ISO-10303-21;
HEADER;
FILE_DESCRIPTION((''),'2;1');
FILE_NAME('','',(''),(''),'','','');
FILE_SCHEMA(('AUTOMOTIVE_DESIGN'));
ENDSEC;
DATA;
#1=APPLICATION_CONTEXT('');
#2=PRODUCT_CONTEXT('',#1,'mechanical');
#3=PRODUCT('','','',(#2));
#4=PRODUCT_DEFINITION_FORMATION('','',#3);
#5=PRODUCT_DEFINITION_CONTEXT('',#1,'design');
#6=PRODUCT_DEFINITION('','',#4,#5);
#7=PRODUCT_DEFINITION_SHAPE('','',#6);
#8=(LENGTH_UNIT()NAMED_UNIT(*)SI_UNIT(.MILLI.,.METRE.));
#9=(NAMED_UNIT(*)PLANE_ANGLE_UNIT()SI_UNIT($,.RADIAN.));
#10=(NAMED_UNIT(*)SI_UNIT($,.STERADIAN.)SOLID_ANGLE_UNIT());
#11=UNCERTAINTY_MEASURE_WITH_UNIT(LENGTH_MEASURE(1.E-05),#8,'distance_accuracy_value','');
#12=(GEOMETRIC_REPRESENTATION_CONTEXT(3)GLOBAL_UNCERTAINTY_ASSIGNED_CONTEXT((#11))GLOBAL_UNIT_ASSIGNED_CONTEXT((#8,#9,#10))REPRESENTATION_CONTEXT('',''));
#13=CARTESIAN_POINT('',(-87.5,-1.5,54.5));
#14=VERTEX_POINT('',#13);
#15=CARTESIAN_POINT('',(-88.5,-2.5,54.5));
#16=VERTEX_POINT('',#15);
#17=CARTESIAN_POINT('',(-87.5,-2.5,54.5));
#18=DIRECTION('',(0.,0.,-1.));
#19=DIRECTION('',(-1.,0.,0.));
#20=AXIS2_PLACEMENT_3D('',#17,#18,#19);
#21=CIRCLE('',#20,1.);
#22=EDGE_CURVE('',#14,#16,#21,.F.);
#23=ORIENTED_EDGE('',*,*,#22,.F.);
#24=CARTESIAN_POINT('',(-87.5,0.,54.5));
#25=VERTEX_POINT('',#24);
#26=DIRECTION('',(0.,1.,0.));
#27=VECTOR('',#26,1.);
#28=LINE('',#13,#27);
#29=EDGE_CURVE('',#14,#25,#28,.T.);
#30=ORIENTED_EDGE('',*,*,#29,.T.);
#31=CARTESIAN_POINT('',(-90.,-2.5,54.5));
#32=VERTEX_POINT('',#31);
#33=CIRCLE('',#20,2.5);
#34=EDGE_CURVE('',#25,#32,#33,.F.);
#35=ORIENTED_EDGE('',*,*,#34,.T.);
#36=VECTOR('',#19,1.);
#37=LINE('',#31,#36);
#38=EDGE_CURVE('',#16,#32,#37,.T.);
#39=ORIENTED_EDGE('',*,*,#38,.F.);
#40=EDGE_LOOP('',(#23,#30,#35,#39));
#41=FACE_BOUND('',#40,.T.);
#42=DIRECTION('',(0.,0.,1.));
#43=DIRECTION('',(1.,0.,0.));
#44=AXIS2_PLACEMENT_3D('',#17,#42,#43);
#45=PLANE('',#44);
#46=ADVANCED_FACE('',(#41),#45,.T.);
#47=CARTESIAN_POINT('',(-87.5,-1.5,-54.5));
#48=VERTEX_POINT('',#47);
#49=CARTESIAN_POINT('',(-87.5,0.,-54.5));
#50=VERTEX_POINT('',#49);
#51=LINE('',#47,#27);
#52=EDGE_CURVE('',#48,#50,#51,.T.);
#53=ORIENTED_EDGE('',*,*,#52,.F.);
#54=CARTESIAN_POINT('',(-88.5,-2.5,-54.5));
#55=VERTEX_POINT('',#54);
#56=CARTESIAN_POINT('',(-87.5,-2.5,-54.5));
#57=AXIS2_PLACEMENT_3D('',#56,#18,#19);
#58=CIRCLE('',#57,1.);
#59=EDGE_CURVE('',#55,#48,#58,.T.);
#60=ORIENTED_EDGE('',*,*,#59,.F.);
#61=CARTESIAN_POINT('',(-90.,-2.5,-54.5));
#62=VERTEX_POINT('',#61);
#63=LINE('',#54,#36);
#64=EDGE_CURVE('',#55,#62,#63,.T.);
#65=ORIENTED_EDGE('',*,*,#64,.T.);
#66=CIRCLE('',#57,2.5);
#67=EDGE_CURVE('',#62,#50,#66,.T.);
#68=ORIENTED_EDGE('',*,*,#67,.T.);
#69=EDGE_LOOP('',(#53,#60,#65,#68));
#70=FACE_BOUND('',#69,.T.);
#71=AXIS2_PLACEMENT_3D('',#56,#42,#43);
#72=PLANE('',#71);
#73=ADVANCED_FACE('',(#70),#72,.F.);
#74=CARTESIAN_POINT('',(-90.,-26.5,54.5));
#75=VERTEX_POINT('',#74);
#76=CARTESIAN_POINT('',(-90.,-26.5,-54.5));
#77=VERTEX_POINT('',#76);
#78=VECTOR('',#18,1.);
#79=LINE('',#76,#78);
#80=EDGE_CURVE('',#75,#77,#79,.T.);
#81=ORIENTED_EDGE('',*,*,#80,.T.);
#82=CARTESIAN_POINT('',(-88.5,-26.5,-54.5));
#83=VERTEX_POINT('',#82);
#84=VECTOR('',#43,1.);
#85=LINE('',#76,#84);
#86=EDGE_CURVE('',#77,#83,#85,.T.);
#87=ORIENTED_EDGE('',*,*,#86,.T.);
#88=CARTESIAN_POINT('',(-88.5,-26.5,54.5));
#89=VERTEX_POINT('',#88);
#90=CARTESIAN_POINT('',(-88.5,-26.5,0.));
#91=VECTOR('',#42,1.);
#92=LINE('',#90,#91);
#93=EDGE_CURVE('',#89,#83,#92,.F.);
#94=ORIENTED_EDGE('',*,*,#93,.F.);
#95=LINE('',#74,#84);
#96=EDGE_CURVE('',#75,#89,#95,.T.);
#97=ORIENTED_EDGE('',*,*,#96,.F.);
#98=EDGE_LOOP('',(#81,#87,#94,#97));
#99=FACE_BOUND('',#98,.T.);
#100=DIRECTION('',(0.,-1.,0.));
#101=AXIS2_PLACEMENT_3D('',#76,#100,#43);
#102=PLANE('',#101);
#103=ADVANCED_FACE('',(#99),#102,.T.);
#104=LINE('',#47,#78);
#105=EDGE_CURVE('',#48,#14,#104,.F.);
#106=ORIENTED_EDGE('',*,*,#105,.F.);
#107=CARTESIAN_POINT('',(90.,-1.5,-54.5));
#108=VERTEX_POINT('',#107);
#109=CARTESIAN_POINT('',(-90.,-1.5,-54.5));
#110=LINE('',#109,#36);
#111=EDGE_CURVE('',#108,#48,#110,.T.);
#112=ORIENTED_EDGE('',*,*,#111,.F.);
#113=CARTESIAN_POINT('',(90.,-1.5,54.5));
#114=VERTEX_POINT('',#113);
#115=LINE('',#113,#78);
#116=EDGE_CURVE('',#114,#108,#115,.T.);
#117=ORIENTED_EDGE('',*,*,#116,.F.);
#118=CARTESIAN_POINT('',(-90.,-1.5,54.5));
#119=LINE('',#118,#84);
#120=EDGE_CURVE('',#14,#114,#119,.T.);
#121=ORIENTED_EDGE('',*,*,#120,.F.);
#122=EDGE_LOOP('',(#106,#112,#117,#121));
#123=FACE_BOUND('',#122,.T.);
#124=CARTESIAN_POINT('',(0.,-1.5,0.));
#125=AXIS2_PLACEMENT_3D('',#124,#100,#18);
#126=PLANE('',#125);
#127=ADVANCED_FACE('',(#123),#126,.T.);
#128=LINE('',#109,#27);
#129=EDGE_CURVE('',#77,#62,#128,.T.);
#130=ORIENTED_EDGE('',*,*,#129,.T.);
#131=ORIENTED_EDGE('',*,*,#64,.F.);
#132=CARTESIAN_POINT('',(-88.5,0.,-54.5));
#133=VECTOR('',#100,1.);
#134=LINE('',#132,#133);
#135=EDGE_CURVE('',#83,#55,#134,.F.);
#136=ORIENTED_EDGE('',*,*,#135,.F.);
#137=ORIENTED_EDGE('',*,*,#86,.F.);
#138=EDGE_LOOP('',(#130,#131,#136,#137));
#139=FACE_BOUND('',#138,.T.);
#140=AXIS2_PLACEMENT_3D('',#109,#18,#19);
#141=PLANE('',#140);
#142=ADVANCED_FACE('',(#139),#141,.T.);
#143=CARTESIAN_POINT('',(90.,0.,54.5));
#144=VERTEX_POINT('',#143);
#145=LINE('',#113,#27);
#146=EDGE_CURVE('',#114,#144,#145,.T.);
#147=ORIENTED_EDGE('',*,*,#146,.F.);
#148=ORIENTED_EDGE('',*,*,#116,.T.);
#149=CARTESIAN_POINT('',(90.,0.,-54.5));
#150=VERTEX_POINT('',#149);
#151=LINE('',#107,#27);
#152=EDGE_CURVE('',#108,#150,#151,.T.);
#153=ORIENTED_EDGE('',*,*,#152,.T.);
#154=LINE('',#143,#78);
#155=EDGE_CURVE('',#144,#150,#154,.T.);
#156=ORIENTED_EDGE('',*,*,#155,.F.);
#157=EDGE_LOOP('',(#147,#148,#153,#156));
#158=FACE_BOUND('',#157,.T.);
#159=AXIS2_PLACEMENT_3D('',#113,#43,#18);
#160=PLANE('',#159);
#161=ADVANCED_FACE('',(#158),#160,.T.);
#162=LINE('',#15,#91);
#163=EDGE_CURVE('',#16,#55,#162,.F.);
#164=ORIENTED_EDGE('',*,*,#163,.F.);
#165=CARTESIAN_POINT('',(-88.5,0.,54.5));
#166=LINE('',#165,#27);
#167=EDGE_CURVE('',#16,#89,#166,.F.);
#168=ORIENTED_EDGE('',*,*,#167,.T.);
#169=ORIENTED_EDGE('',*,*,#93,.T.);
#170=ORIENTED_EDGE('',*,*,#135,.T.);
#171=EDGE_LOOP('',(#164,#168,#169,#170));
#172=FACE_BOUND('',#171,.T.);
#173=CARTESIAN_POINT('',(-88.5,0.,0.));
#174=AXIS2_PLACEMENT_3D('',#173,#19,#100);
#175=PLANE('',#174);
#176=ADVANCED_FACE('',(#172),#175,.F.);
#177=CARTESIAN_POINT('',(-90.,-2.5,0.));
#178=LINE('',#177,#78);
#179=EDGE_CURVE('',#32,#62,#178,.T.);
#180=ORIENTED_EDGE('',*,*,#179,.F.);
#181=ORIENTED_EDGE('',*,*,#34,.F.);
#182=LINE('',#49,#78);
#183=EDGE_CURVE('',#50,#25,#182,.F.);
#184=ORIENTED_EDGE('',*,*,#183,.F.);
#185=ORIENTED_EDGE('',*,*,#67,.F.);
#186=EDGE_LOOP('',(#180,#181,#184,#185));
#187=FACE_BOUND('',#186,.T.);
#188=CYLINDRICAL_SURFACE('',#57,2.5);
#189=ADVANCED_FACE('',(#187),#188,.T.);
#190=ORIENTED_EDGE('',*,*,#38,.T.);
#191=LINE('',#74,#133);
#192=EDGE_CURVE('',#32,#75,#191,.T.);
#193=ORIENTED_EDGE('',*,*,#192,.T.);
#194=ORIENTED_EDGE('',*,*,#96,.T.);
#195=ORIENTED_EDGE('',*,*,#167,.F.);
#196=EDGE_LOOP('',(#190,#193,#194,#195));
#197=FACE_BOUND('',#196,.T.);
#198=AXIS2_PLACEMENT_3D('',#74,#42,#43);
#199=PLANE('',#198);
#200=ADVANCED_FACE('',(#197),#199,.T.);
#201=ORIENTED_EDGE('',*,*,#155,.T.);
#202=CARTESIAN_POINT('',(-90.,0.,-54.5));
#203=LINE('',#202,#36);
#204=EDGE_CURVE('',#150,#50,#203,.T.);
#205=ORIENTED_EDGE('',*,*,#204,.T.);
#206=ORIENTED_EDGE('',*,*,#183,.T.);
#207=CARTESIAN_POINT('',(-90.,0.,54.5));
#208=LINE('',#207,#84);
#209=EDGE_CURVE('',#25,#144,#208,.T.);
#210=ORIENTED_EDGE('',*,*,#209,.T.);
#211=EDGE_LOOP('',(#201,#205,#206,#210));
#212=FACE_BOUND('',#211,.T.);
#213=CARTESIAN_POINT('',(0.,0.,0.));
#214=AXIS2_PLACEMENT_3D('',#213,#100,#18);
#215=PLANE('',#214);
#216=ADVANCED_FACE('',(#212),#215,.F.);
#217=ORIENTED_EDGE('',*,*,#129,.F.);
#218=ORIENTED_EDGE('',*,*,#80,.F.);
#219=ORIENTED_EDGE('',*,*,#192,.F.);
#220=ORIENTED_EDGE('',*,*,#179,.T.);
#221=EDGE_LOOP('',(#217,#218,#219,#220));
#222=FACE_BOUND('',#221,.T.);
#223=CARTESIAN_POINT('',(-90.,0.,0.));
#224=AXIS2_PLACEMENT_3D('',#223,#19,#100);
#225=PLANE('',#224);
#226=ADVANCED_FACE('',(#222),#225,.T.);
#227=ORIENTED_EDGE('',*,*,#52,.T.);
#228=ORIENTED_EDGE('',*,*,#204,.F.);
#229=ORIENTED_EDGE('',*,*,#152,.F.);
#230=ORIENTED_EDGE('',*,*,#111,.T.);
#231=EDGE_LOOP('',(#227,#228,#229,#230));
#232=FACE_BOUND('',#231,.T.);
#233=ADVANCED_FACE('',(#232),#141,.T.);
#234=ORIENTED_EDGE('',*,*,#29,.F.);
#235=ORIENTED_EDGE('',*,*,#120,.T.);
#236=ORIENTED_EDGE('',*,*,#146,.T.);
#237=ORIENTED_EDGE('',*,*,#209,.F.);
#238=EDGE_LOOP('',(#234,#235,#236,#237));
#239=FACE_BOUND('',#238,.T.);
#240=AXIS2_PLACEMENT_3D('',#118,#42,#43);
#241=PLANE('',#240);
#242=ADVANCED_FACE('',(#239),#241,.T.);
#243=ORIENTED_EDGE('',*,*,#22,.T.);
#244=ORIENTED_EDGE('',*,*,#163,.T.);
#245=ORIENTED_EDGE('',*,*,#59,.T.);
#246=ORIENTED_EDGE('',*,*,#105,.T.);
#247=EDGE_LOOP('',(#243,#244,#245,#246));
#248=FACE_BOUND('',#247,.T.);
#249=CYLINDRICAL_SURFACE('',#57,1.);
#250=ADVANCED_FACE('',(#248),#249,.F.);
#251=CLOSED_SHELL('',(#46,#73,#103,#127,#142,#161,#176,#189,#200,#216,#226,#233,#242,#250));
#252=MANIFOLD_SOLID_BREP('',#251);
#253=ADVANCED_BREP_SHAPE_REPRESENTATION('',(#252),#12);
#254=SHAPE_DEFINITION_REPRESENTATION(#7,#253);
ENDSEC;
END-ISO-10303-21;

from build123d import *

# Parameters (mm, degrees)
SKETCH_1_W                       = 180
SKETCH_1_H                       = 109
SM_BASE_FLANGE_1_DEPTH           = 1.5
SM_EDGE_FLANGE_1_STRIP_W         = 8
SM_EDGE_FLANGE_1_STRIP_H         = 1.5
SM_EDGE_FLANGE_1_STRIP_CUT_DEPTH = 109
SM_EDGE_FLANGE_1_DEPTH           = 109


# Sheet-metal steps are written as plain solids
with BuildPart() as part:
    # Sketch 1 → 基体-法兰1 (new body)
    with BuildSketch(Plane(origin=(0, 0, 0), x_dir=(1, 0, 0), z_dir=(0, 1, 0))):
        Rectangle(SKETCH_1_W, SKETCH_1_H)
    extrude(amount=-SM_BASE_FLANGE_1_DEPTH)

    # 边线-法兰1 strip (across the edge) → 边线-法兰1 strip cut (cut)
    with BuildSketch(Plane(origin=(-90, -1.5, 54.5), x_dir=(1, 0, 0), z_dir=(0, 0, -1))):
        with Locations((-1.5, -0.75)):
            Rectangle(SM_EDGE_FLANGE_1_STRIP_W, SM_EDGE_FLANGE_1_STRIP_H)
    extrude(amount=SM_EDGE_FLANGE_1_STRIP_CUT_DEPTH, mode=Mode.SUBTRACT)

    # 边线-法兰1 section (across the edge) → 边线-法兰1 (add)
    with BuildSketch(Plane(origin=(-90, -1.5, 54.5), x_dir=(1, 0, 0), z_dir=(0, 0, -1))):
        with BuildLine():
            Line((0, 1), (0, 25))
            Line((0, 25), (1.5, 25))
            Line((1.5, 25), (1.5, 1))
            ThreePointArc((1.5, 1), (1.792893219, 0.292893219), (2.5, 0))
            Line((2.5, 0), (2.5, -1.5))
            ThreePointArc((2.5, -1.5), (0.732233047, -0.767766953), (0, 1))
        make_face()
    extrude(amount=SM_EDGE_FLANGE_1_DEPTH)


solid = part.part
